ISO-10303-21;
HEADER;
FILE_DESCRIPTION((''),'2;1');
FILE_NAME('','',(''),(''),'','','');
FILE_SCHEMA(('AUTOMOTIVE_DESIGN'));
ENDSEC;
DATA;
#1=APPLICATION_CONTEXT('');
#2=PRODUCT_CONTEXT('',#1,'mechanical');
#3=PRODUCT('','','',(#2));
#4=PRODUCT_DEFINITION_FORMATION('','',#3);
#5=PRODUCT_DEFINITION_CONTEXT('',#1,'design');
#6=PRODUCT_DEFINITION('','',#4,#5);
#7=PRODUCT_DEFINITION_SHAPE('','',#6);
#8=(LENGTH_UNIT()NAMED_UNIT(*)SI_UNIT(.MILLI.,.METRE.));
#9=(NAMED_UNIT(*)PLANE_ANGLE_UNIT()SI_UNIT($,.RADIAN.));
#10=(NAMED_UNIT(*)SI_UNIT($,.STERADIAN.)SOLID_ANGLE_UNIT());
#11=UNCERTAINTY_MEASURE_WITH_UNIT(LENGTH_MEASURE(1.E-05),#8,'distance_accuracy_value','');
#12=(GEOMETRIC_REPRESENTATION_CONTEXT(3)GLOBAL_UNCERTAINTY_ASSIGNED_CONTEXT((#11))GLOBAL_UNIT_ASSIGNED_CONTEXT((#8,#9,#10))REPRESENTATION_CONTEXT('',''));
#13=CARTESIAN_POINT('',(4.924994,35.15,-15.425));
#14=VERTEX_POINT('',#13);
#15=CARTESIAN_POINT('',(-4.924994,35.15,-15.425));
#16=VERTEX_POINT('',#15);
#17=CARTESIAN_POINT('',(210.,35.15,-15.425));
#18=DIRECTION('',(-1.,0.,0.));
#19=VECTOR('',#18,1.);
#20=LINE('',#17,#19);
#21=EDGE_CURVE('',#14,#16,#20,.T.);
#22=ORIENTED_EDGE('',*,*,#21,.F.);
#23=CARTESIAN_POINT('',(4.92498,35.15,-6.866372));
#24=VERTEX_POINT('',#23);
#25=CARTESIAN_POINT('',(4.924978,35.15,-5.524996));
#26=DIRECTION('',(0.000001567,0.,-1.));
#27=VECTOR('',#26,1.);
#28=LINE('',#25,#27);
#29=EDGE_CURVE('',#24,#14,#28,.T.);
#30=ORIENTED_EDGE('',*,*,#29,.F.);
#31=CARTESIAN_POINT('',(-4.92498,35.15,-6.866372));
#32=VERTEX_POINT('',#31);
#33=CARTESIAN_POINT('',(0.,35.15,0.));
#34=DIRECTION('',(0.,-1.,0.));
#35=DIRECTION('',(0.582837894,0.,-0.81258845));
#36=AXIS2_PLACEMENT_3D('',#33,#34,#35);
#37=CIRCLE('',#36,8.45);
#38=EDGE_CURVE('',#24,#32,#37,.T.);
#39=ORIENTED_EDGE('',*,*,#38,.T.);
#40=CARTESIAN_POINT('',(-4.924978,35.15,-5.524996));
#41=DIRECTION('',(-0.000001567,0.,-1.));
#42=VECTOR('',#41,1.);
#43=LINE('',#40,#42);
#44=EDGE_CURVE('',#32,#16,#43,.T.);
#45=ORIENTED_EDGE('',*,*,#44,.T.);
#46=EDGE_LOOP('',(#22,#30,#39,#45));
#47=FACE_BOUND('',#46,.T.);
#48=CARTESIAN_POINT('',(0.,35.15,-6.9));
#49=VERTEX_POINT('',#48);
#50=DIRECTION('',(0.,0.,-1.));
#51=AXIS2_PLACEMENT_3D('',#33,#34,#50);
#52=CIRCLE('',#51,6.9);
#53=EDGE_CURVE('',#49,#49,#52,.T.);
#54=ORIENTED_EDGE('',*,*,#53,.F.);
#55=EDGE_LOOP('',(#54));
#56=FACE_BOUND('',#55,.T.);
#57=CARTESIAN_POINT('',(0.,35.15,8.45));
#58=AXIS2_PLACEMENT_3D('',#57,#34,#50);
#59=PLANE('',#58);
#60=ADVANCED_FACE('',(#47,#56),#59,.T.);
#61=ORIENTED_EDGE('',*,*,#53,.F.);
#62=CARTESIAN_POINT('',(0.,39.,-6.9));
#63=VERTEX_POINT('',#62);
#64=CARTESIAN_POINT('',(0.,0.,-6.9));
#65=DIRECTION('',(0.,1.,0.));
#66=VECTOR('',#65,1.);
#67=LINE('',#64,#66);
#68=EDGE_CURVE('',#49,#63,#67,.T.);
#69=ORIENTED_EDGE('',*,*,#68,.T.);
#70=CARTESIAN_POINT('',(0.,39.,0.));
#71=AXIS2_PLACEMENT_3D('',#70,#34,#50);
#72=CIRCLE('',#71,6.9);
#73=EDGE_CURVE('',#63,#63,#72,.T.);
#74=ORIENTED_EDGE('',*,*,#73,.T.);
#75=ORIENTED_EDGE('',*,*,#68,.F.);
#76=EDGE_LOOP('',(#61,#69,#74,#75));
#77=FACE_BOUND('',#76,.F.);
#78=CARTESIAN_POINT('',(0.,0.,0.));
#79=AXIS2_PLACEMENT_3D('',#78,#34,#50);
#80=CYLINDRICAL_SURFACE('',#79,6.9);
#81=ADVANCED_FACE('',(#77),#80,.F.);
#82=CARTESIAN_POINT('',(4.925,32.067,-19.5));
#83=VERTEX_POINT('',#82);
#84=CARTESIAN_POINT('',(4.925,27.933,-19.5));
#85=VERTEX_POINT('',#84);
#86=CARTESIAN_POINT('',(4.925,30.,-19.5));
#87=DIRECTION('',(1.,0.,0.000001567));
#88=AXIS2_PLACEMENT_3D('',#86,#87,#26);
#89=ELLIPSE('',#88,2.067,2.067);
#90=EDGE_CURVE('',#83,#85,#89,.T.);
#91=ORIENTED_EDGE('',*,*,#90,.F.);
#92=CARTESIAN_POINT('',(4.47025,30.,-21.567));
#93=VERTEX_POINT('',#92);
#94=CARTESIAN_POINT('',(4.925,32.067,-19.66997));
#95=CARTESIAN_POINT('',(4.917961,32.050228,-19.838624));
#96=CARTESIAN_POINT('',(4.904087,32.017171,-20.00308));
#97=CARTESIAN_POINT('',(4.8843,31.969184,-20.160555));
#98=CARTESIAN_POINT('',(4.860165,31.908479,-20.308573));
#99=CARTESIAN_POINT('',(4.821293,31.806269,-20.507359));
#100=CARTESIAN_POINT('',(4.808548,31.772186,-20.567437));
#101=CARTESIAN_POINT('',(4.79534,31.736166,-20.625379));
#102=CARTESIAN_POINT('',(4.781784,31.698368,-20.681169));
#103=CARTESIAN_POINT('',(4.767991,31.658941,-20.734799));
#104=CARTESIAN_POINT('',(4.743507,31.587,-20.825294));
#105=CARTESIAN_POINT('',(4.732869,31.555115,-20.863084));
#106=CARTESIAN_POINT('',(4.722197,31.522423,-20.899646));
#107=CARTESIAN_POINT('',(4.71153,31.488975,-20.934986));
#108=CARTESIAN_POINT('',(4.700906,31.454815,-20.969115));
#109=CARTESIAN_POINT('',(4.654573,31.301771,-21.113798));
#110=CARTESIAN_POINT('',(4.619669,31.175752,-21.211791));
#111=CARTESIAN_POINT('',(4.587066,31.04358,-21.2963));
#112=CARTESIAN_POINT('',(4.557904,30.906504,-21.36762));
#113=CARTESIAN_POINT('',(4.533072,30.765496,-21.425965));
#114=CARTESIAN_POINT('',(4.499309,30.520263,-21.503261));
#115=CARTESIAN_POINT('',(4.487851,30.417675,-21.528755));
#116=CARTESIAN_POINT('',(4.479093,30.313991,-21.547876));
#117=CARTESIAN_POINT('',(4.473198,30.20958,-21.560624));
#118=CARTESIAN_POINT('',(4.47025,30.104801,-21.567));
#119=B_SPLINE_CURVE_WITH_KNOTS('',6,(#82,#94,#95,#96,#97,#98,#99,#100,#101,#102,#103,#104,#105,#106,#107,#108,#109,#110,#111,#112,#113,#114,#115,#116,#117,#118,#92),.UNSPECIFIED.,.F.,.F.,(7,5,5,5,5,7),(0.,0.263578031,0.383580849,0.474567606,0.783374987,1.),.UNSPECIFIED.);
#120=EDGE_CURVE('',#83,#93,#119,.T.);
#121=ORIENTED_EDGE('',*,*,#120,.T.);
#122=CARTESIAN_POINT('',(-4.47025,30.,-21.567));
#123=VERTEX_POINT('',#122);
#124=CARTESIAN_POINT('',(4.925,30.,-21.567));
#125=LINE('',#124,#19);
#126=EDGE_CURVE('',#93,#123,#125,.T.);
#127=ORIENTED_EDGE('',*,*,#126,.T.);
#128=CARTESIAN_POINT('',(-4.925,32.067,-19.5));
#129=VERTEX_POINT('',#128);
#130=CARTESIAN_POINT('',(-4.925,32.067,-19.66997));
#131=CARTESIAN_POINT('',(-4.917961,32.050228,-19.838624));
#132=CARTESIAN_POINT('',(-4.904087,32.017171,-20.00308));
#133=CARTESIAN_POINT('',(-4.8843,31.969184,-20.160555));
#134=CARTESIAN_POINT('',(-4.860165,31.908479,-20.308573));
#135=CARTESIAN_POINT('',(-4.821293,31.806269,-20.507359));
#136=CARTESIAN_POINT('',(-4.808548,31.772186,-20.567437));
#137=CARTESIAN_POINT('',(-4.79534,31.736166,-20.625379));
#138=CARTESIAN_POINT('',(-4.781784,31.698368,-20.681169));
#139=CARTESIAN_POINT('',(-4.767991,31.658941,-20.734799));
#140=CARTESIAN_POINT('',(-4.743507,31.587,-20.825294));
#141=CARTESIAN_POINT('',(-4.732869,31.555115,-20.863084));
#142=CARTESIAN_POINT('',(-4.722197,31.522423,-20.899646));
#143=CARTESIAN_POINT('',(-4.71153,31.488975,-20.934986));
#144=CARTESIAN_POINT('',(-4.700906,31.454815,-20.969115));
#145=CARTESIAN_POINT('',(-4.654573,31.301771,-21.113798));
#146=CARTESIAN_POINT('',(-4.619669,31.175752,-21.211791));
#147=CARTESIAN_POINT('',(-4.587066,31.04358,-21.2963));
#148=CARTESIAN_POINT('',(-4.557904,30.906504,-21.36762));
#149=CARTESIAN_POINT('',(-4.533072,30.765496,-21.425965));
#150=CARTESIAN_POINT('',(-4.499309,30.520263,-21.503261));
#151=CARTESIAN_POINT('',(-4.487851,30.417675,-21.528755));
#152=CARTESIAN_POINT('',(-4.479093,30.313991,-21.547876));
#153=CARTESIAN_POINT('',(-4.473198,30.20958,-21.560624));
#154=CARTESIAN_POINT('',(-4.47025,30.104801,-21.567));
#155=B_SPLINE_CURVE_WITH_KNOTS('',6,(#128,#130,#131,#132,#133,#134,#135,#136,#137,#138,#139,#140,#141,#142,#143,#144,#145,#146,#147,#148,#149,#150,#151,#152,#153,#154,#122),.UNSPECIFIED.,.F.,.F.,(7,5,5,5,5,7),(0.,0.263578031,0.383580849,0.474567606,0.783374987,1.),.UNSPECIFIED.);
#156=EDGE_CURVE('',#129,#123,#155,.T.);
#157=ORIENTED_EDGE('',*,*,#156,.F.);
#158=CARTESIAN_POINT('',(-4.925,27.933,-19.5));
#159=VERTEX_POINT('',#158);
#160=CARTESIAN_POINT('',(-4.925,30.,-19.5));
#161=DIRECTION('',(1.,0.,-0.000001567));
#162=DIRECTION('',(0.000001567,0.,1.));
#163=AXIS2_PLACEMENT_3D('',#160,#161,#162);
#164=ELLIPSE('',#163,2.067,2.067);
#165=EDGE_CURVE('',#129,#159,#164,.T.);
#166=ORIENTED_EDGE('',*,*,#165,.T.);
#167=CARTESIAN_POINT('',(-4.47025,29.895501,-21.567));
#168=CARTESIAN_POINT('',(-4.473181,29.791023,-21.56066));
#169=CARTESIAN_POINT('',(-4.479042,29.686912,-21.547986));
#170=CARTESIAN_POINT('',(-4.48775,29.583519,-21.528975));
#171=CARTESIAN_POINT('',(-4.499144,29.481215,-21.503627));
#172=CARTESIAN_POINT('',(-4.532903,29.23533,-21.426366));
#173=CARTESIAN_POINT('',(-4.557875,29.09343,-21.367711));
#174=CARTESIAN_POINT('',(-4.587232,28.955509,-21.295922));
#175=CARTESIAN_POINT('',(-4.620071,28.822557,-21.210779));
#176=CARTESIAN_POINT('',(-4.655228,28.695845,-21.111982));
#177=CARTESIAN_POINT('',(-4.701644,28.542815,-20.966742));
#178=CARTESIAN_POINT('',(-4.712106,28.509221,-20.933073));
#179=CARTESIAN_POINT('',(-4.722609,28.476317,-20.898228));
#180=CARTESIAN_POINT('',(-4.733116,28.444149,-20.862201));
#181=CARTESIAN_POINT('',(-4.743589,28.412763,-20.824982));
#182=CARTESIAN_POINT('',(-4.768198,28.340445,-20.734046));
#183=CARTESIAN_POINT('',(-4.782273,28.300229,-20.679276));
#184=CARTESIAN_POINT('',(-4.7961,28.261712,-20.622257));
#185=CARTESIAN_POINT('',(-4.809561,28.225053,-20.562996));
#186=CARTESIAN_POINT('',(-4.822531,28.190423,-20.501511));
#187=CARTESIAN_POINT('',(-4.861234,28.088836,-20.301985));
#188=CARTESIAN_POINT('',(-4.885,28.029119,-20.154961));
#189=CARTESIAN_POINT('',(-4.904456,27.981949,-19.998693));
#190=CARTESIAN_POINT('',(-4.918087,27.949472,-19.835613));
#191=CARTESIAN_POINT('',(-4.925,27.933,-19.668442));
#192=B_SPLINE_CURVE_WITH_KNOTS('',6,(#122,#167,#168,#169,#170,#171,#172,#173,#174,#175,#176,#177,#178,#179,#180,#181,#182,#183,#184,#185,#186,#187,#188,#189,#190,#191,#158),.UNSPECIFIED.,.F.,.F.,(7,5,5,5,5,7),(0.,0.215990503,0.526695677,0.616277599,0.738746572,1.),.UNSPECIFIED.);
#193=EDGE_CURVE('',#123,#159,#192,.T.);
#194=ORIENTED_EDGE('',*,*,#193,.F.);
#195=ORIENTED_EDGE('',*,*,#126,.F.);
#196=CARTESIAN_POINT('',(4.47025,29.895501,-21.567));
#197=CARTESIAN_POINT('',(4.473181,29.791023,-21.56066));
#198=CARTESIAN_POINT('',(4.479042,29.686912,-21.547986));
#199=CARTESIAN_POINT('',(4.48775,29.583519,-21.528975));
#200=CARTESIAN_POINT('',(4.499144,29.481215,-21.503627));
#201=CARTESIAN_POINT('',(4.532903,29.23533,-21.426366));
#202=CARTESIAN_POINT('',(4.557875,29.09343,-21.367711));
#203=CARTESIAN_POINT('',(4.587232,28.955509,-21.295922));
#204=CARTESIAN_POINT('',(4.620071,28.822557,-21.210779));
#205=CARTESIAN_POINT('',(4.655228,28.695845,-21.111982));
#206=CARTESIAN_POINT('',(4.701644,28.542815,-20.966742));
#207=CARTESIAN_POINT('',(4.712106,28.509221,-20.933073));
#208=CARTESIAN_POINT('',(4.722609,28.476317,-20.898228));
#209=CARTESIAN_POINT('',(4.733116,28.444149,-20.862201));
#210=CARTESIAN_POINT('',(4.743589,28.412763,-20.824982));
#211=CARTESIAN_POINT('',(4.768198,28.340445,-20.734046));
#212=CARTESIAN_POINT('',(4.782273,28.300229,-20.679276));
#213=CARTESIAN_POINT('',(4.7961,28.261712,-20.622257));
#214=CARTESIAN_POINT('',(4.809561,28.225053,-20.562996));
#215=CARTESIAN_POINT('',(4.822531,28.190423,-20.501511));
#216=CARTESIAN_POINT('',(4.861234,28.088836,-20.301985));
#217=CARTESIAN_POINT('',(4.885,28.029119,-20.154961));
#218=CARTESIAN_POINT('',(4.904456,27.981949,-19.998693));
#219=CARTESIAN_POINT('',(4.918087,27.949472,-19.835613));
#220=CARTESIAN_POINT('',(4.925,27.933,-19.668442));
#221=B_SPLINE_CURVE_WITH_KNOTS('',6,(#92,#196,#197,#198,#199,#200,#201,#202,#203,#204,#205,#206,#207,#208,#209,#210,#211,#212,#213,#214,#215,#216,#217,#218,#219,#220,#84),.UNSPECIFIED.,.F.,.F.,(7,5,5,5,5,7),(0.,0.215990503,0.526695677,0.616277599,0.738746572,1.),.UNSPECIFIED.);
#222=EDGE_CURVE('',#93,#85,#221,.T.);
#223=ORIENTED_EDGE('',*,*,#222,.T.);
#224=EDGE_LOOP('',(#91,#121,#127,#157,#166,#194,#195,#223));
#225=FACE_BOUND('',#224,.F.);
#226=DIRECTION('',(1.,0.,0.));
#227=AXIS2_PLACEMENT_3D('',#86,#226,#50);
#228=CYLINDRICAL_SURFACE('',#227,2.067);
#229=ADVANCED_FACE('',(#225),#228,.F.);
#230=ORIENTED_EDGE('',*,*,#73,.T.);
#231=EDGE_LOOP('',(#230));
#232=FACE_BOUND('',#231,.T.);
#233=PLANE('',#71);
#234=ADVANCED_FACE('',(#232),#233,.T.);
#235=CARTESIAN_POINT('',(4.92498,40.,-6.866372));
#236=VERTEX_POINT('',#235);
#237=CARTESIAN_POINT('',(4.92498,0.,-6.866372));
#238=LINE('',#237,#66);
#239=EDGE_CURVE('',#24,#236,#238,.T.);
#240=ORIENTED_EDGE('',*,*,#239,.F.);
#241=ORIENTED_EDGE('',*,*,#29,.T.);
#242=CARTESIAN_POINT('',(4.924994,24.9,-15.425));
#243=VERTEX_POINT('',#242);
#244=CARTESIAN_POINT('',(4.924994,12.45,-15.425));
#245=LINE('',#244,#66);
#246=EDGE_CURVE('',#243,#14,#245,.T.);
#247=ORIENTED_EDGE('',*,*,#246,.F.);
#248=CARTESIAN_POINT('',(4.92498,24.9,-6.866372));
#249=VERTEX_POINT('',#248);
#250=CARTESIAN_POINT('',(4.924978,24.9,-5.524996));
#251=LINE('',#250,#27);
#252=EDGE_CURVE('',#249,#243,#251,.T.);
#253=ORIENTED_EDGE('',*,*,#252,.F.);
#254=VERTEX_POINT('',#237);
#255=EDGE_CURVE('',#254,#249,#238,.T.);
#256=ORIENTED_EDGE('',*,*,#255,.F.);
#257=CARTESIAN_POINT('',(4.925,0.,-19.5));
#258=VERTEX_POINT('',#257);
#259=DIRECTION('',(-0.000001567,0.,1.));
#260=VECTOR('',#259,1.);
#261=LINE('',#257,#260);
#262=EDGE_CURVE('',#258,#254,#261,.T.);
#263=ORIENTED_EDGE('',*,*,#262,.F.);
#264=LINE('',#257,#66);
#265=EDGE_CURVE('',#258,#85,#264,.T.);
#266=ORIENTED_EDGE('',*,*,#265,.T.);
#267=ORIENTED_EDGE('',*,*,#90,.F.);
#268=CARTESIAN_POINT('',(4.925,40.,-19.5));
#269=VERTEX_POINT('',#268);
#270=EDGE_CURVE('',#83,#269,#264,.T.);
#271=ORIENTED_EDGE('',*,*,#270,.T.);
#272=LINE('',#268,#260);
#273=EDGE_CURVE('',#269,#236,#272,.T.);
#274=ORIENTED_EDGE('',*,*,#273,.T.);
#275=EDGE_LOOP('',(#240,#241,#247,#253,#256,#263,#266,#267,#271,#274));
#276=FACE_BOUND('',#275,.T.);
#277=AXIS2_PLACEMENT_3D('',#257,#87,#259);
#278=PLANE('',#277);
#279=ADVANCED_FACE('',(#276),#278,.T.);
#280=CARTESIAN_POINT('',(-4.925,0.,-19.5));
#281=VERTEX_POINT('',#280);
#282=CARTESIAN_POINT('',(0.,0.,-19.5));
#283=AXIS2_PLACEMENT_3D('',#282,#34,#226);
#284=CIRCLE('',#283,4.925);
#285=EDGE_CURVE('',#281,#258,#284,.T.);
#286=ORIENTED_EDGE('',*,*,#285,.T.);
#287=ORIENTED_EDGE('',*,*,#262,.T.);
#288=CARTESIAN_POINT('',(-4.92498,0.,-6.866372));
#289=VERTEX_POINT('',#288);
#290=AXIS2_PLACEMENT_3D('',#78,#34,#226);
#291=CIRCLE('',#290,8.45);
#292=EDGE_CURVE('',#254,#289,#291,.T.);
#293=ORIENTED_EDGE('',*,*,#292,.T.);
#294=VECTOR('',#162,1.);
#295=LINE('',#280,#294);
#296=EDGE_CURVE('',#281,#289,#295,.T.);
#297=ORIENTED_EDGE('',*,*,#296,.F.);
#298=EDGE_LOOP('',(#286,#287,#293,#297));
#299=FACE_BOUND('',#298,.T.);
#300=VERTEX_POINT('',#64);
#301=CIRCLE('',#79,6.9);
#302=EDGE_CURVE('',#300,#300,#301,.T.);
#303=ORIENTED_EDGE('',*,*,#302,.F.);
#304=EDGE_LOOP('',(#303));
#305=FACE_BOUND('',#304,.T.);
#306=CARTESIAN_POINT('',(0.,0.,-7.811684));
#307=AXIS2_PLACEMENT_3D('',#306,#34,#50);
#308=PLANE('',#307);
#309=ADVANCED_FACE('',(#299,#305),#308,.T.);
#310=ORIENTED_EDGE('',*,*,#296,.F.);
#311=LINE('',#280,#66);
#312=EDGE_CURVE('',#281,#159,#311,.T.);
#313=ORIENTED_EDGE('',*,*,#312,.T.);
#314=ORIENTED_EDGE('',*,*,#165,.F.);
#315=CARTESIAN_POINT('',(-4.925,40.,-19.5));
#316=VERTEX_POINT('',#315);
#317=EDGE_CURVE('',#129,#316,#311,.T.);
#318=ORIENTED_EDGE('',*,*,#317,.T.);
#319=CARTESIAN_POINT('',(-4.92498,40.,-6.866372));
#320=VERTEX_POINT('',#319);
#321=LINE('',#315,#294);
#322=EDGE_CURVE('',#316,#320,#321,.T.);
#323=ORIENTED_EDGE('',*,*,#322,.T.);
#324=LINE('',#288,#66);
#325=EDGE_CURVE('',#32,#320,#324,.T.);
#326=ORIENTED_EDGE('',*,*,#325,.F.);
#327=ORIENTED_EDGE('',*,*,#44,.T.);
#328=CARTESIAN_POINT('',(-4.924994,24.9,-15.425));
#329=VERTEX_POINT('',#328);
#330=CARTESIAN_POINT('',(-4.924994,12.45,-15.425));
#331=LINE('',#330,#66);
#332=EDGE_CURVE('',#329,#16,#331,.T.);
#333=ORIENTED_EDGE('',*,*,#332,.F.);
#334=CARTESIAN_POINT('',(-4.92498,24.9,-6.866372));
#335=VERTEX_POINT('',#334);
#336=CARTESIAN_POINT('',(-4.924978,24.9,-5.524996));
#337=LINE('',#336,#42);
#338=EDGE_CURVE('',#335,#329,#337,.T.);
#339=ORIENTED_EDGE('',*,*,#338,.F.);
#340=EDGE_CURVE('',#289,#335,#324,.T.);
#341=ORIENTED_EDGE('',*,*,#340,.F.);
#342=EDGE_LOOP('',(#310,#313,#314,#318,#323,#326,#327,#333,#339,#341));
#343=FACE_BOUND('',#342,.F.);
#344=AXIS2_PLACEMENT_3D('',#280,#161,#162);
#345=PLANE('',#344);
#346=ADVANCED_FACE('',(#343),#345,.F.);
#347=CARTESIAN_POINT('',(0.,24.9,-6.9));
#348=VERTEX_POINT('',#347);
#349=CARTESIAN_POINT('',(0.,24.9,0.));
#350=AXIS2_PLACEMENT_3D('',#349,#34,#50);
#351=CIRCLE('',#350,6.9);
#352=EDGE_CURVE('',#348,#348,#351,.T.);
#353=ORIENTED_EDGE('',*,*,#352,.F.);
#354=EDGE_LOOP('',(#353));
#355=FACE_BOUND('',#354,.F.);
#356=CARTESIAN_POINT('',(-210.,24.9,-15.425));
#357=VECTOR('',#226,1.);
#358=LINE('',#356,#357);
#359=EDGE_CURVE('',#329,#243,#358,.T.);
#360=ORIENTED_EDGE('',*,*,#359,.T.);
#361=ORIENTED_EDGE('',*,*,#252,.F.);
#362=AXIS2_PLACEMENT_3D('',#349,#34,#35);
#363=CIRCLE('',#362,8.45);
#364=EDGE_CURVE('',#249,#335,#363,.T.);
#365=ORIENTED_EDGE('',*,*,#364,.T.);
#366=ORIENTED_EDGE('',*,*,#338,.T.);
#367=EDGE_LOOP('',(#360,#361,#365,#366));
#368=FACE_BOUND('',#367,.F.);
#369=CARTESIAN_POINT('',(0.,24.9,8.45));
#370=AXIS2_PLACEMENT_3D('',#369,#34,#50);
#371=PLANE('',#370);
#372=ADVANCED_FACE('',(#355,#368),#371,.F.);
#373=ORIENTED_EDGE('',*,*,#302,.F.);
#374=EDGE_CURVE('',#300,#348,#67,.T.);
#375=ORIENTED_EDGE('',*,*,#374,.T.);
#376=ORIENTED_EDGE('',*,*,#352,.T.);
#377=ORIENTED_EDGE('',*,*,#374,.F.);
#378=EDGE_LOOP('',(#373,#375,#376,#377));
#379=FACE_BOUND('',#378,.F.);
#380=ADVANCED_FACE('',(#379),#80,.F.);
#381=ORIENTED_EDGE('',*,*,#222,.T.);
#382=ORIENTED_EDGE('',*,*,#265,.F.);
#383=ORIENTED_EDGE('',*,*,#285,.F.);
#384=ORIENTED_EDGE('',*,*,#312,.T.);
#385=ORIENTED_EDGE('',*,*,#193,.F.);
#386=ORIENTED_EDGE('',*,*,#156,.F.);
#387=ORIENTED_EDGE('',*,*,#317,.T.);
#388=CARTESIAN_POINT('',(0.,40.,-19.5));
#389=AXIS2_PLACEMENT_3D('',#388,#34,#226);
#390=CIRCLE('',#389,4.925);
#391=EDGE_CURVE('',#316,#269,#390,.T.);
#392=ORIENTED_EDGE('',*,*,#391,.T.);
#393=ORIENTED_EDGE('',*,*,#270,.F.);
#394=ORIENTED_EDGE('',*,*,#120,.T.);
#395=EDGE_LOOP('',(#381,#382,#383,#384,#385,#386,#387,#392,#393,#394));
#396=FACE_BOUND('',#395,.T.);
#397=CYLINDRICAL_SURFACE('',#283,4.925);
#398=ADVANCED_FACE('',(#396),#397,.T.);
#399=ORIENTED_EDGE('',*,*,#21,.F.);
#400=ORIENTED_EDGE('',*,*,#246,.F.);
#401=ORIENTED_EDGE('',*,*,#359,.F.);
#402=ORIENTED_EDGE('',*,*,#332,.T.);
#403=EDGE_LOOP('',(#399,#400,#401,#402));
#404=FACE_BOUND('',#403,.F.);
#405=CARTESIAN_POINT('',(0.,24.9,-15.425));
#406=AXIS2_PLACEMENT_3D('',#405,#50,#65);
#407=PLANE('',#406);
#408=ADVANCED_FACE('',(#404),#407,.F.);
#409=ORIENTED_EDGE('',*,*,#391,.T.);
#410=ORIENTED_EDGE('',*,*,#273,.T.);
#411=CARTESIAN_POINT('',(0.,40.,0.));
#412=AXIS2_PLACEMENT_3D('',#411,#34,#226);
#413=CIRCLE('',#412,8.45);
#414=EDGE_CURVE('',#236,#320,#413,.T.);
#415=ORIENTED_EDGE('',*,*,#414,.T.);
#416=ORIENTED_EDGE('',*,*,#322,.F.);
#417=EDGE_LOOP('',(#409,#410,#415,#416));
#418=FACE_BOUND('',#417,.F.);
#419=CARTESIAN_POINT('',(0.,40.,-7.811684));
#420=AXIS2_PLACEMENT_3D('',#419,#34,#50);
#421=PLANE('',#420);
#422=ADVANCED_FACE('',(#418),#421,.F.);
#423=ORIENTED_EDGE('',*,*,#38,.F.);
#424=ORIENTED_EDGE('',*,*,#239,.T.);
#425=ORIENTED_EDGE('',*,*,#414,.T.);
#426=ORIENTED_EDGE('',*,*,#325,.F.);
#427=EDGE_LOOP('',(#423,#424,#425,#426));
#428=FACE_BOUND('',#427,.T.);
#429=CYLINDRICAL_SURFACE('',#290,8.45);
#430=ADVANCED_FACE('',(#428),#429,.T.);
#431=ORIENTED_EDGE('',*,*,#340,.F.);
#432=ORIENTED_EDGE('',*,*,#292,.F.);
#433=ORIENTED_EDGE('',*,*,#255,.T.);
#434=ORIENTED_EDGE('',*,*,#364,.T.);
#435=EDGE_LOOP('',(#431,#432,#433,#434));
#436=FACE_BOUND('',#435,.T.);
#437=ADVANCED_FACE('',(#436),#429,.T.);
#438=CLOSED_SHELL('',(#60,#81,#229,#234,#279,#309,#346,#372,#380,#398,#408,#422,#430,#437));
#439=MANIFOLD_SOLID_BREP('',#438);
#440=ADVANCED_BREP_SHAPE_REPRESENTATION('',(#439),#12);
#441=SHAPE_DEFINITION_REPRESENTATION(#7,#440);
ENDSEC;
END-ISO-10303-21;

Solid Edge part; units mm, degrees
sketch "Sketch1" plane through (0, 0, 0) normal (0, -1, 0) x (1, 0, 0)
  line L0 (4.925, -19.5) -> (4.925, -6.8664)
  line L1 (-4.925, -19.5) -> (-4.925, -6.8664)
  arc A0 (-4.925, -19.5) -> (4.925, -19.5) centre (0, -19.5) ccw
  arc A1 (4.925, -6.8664) -> (-4.925, -6.8664) centre (0, 0) ccw
extrude "Protrusion1" add sketch "Sketch1" against normal blind 40
sketch "Sketch2" plane through (0, 0, -7.9875) normal (0, -1, 0) x (0, 0, -1)
  circle A0 centre (-7.9875, 0) radius 6.9
  dimension "D1" = 13.8
extrude "Ausschnitt_1" cut sketch "Sketch2" against normal blind 39
sketch "Sketch3" plane through (0, 0, 0) normal (1, 0, 0) x (0, 1, 0)
  line L0 (35.15, 8.45) -> (24.9, 8.45)
  line L1 (24.9, 8.45) -> (24.9, -15.425)
  line L2 (24.9, -15.425) -> (35.15, -15.425)
  line L3 (35.15, 8.45) -> (35.15, -15.425)
  dimension "D1" = 9
  dimension "D2" = 10.25
  dimension "D3" = 4.85
extrude "Cutout1" cut sketch "Sketch3" against normal through all and the other way through all
hole "Bohrung_1" at (4.925, 30, -19.5) direction (1, 0, 0) diameter 4.134 end through all both ways yes thread major 5 thread length 2
